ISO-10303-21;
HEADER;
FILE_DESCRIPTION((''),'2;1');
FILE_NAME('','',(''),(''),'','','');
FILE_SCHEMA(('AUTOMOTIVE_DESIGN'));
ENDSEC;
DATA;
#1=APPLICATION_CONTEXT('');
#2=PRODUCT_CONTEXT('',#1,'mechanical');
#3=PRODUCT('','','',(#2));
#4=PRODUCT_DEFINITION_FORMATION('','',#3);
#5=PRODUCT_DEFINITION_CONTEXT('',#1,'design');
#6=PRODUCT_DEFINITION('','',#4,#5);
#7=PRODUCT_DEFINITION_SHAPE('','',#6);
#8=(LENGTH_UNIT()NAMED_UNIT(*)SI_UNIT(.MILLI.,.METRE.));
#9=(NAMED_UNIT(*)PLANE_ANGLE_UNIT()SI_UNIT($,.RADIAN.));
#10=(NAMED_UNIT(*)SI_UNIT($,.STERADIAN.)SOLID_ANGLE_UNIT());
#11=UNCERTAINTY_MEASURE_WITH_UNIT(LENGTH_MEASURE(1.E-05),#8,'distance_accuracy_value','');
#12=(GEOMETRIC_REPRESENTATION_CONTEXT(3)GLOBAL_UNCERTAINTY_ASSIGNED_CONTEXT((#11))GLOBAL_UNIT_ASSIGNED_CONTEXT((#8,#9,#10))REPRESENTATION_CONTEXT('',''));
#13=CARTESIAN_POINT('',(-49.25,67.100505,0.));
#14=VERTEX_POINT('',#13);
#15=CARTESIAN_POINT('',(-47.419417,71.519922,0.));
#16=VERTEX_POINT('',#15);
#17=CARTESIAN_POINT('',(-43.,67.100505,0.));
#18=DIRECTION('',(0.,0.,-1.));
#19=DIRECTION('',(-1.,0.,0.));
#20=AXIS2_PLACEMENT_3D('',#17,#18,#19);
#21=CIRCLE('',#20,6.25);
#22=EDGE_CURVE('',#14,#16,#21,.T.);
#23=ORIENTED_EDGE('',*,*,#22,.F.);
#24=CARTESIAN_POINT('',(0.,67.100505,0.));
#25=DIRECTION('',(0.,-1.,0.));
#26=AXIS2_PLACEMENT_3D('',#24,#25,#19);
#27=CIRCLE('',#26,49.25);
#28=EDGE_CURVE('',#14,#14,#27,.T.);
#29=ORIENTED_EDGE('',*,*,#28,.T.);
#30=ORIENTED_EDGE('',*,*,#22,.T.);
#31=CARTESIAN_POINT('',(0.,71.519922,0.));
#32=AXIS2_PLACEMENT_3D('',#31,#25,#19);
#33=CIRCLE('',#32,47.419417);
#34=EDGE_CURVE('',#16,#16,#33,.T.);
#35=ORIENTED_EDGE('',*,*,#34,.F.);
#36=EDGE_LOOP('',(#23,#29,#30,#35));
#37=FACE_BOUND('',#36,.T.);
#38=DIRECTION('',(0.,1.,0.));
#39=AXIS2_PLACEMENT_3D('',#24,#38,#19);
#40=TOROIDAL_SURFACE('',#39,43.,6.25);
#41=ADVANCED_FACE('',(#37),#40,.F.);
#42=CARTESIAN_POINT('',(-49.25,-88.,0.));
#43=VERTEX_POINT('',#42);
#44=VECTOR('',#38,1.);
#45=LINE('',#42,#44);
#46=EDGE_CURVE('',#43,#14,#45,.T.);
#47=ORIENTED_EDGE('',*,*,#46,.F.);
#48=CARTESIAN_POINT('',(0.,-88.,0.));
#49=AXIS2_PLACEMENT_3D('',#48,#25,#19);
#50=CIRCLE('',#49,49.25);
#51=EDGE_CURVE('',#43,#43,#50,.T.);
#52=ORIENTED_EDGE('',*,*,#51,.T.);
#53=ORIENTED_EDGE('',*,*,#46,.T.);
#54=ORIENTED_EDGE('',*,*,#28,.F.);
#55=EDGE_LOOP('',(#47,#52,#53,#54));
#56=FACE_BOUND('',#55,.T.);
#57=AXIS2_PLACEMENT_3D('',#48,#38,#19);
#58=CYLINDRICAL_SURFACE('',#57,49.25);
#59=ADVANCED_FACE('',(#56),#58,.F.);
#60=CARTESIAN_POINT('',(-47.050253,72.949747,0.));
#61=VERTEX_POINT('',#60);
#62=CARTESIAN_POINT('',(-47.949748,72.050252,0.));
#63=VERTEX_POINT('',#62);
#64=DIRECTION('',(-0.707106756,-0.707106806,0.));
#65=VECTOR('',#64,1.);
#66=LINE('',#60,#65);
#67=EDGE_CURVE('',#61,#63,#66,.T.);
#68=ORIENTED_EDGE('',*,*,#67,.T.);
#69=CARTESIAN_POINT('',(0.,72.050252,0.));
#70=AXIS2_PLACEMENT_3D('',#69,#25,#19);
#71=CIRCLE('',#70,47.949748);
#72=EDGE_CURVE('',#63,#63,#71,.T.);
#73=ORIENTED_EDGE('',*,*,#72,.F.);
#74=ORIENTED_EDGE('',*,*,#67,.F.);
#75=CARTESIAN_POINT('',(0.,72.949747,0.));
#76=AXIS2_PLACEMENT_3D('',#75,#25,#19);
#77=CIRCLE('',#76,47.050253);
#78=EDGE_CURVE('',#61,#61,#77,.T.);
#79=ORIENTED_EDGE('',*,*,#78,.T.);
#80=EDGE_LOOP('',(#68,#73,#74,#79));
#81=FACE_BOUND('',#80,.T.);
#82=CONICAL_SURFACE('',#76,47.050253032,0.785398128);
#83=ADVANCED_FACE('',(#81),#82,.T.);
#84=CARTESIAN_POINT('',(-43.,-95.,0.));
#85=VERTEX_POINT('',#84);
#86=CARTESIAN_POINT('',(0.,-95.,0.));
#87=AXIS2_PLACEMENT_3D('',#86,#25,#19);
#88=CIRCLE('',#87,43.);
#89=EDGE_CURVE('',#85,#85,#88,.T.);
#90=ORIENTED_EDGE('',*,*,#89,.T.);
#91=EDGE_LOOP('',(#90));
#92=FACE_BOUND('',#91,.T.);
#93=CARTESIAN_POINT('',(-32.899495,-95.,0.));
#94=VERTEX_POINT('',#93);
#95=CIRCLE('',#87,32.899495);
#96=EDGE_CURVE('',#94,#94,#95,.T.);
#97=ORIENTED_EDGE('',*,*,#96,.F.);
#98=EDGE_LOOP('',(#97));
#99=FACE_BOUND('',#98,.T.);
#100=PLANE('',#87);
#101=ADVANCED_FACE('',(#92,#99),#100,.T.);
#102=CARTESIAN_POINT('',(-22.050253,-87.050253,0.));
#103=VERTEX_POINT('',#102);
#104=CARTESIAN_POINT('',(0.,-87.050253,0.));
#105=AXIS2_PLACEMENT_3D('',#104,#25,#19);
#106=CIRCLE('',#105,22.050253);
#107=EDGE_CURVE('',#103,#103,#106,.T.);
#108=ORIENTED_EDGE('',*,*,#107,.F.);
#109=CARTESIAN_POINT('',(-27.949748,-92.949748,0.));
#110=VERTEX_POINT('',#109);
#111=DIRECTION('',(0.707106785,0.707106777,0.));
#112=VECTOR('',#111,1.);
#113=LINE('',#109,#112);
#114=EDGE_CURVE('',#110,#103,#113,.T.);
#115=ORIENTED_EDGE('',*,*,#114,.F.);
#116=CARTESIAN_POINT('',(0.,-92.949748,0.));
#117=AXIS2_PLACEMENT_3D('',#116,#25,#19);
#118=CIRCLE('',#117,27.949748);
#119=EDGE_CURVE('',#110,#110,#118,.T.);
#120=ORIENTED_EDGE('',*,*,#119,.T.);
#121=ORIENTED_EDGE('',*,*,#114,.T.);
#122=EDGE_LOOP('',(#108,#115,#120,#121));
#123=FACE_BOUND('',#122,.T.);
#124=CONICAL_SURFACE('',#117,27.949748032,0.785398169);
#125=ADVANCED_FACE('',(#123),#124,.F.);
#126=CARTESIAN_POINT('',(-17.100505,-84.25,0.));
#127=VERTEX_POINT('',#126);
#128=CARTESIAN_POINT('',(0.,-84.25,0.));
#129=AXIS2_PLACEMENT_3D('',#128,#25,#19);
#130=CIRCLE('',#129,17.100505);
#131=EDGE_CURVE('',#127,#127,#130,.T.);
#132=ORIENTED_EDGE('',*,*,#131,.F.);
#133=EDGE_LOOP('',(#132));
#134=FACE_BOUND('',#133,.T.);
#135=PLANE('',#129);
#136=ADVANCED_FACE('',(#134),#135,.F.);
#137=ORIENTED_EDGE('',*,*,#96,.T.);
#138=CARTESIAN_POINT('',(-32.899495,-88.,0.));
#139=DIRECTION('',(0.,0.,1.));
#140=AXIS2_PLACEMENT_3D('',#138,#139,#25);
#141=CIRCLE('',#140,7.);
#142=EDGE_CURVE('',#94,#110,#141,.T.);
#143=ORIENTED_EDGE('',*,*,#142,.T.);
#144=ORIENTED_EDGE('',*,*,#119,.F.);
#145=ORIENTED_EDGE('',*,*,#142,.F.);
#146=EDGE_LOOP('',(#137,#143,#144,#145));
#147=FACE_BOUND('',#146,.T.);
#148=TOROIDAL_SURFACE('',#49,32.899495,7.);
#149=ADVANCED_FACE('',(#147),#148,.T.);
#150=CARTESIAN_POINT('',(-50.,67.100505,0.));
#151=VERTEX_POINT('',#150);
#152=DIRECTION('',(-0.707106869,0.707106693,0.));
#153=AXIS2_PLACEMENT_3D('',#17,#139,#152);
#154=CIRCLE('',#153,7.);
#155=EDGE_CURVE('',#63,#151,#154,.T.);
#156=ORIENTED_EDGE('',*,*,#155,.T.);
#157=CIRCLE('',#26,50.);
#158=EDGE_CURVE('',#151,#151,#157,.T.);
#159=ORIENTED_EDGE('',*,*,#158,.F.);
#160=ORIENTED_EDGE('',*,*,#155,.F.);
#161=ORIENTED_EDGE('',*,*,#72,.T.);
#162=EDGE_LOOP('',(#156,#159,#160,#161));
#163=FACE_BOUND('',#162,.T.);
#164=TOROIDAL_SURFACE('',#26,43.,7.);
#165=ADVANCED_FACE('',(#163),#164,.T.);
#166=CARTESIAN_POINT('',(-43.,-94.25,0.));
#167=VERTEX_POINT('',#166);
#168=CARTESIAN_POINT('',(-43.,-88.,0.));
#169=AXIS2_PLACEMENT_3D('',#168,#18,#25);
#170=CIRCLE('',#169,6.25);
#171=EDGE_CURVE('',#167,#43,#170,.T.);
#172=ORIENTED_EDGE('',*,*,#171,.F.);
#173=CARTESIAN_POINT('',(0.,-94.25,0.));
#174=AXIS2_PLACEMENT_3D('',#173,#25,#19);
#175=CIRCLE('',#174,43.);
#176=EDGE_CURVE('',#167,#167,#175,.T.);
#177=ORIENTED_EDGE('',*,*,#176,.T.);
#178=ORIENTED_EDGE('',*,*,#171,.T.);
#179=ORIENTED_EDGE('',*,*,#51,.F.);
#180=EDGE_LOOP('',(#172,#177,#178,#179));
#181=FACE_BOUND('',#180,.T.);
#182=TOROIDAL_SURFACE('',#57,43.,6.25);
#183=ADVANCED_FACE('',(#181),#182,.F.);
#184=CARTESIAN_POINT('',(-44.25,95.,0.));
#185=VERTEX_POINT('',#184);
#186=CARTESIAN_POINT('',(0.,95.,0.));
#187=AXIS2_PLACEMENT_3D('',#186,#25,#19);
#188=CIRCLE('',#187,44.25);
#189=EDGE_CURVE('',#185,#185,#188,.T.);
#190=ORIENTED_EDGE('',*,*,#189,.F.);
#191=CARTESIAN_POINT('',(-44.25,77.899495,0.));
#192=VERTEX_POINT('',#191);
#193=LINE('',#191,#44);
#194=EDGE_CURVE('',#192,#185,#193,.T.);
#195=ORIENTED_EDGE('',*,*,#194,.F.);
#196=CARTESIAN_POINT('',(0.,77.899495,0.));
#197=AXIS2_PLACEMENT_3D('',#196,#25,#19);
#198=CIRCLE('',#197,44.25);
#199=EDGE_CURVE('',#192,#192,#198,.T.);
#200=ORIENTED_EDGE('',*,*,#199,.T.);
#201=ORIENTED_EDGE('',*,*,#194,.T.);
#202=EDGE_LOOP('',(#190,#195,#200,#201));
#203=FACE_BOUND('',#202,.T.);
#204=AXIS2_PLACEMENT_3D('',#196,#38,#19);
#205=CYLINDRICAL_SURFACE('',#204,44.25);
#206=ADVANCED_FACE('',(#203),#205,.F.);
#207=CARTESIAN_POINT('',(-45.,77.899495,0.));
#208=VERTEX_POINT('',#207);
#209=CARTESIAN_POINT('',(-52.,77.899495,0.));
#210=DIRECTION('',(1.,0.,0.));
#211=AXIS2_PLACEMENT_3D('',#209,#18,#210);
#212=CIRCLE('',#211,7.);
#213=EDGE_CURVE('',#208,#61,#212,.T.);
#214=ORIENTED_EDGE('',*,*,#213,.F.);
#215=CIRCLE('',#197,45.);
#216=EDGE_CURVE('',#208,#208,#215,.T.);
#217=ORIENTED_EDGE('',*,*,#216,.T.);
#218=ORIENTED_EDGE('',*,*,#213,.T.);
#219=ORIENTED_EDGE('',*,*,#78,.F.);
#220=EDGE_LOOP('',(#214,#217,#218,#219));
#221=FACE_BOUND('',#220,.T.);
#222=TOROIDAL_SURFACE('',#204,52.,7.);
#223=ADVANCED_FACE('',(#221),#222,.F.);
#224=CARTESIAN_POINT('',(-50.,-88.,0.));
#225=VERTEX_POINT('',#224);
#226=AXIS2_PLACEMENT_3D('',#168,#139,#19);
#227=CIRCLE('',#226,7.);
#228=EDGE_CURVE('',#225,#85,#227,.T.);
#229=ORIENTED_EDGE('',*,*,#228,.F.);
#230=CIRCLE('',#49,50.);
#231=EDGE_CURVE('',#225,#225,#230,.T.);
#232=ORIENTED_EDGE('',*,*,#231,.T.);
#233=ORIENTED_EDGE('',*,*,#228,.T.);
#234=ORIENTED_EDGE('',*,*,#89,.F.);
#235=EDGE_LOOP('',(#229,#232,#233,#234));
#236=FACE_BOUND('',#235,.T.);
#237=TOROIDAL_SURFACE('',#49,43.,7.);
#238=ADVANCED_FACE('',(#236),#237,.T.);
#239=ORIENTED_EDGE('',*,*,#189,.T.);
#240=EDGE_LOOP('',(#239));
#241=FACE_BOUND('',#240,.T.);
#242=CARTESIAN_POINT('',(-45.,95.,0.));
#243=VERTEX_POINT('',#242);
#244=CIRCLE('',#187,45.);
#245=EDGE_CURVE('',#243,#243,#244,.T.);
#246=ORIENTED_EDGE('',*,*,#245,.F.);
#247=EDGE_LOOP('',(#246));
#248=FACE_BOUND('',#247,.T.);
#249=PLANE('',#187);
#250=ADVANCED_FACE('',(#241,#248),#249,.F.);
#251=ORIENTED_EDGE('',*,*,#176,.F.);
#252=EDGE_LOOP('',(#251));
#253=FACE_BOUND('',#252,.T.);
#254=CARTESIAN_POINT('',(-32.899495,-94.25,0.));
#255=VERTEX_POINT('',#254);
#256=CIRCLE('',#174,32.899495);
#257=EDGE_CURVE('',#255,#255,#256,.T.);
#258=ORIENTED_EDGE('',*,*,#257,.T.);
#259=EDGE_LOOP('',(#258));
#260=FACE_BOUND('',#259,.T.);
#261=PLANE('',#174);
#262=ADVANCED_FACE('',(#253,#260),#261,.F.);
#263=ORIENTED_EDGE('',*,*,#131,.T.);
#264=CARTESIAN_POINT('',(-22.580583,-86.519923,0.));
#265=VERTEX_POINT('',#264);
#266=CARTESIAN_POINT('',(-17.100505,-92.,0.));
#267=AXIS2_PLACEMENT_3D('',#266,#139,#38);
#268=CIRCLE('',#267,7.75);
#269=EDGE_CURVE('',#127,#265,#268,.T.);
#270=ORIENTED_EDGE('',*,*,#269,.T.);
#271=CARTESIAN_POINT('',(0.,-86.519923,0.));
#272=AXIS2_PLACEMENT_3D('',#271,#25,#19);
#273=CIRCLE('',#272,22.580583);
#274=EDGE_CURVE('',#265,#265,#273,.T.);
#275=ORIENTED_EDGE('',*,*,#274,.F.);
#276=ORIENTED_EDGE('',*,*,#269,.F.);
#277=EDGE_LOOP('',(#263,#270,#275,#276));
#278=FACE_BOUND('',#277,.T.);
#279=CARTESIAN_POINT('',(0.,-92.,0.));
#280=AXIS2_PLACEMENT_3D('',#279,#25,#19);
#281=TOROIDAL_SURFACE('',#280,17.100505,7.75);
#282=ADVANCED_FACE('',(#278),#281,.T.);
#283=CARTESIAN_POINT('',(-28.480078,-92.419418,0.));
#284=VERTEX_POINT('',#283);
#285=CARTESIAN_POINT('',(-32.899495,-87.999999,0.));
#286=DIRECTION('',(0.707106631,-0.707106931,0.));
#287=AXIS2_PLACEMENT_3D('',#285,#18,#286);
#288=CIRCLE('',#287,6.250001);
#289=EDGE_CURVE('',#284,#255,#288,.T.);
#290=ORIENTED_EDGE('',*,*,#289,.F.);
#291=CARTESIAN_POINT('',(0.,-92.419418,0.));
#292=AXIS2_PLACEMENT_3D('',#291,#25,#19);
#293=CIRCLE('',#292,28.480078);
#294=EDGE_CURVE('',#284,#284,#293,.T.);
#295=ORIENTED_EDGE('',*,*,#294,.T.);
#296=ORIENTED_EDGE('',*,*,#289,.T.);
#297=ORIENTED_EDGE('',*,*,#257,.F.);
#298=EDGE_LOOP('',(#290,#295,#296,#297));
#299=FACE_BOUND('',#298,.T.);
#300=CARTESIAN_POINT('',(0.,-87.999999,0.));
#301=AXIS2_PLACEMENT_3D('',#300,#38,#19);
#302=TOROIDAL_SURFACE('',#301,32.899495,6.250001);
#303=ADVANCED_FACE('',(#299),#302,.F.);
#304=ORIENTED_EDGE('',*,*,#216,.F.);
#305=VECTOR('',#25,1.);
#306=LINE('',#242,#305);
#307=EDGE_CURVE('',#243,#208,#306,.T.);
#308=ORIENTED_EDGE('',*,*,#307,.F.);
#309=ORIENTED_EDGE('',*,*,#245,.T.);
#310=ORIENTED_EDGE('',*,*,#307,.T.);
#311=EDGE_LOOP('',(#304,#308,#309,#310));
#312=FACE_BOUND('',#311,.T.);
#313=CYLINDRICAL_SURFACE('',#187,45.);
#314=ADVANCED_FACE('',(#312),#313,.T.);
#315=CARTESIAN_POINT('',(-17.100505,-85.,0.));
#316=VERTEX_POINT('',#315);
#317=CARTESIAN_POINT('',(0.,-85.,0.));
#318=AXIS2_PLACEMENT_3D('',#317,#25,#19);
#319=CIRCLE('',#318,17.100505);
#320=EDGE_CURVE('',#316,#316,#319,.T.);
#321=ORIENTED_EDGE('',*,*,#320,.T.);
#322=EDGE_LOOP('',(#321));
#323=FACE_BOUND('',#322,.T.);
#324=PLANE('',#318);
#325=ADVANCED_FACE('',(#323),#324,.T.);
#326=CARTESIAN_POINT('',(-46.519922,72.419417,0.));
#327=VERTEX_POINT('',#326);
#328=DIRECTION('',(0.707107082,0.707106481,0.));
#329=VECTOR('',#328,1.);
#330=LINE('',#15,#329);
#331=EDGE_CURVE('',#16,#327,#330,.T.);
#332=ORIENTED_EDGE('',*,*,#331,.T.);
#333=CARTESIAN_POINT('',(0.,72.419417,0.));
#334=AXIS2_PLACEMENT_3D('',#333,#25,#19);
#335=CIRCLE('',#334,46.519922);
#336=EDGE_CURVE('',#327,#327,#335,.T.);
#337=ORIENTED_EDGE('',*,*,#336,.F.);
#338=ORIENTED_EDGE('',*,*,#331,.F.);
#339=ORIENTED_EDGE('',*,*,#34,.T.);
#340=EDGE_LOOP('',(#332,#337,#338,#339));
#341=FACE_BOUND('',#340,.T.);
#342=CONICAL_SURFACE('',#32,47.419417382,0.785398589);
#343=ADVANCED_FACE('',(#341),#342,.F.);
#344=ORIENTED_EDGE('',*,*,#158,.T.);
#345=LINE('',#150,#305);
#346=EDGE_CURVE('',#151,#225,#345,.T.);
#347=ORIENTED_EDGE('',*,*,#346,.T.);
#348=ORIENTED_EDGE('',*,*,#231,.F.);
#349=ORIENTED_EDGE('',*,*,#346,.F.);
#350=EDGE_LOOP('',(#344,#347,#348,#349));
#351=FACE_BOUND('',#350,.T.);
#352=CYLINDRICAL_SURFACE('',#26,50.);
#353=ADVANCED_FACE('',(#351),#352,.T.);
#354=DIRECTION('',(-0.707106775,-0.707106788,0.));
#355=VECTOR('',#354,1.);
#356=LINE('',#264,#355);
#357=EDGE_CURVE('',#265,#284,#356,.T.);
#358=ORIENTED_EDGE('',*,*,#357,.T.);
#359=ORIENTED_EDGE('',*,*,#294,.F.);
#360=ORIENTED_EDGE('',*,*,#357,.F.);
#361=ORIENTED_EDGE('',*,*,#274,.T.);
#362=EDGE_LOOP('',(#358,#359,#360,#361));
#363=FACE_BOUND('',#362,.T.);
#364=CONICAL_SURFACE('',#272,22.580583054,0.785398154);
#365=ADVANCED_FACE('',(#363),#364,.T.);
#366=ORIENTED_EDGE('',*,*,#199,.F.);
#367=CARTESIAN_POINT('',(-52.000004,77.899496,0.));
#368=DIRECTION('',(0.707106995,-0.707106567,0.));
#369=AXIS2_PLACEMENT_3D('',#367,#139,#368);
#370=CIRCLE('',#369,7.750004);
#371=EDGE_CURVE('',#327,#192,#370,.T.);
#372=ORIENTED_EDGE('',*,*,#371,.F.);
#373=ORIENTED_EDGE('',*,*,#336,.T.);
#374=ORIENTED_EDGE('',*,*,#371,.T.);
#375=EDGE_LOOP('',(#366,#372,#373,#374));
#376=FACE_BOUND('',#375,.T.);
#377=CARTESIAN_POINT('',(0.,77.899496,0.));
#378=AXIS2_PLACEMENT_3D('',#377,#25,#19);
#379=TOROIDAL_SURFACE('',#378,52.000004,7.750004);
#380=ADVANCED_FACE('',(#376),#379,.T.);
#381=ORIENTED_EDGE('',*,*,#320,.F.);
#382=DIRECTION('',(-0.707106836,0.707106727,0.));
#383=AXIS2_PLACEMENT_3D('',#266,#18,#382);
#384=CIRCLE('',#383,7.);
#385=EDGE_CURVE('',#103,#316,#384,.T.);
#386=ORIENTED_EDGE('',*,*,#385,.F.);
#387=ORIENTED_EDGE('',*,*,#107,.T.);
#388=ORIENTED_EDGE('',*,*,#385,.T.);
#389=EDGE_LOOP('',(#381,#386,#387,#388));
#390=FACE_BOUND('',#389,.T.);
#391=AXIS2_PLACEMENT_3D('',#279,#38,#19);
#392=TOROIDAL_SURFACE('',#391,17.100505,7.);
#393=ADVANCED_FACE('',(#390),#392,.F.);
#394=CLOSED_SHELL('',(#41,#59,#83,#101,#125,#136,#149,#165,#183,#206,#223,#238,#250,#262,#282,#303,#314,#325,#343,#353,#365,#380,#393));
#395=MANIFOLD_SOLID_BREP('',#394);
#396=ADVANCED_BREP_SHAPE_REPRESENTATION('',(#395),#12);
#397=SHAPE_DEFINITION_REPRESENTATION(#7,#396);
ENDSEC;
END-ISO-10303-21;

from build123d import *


# Not quite as in the source:
# - ends of sketch curves that miss each other by under 0.0002 mm in the source are joined


with BuildPart() as f1:
    # F0 (on Top) → F1 (revolve)
    with BuildSketch(Plane.XY):
        with BuildLine():
            Line((-50, 0), (-49.25, 0))
            Line((-49.25, 0), (-49.25, 67.100505))
            ThreePointArc((-49.25, 67.100505), (-48.7742470782, 69.4922764523), (-47.4194173824, 71.5199223824))
            Line((-47.4194173824, 71.5199223824), (-46.519922, 72.419417))
            ThreePointArc((-46.519922, 72.419417), (-44.839933623, 74.9336983992), (-44.25, 77.899495))
            Line((-44.25, 77.899495), (-44.25, 95))
            Line((-44.25, 95), (-45, 95))
            Line((-45, 95), (-45, 77.899495))
            ThreePointArc((-45, 77.899495), (-45.5328434077, 75.2207106468), (-47.0502530317, 72.9497470317))
            Line((-47.0502530317, 72.9497470317), (-47.949748, 72.050252))
            ThreePointArc((-47.949748, 72.050252), (-49.4671568629, 69.7792886999), (-50, 67.100505))
            Line((-50, 67.100505), (-50, 0))
        make_face()
        with BuildLine():
            Line((0, -85), (0, -84.25))
            Line((0, -84.25), (-17.100505, -84.25))
            ThreePointArc((-17.100505, -84.25), (-20.0663019275, -84.8399337583), (-22.5805830542, -86.5199229458))
            Line((-22.5805830542, -86.5199229458), (-28.480078, -92.419418))
            ThreePointArc((-28.480078, -92.419418), (-30.5077238744, -93.7742472135), (-32.899495, -94.25))
            Line((-32.899495, -94.25), (-43, -94.25))
            ThreePointArc((-43, -94.25), (-47.4194173824, -92.4194173824), (-49.25, -88))
            Line((-49.25, -88), (-49.25, 0))
            Line((-49.25, 0), (-50, 0))
            Line((-50, 0), (-50, -88))
            ThreePointArc((-50, -88), (-47.9497474683, -92.9497474683), (-43, -95))
            Line((-43, -95), (-32.899495, -95))
            ThreePointArc((-32.899495, -95), (-30.2207113001, -94.4671568629), (-27.9497480317, -92.9497479683))
            Line((-27.9497480317, -92.9497479683), (-22.050253, -87.050253))
            ThreePointArc((-22.050253, -87.050253), (-19.7792893532, -85.5328434077), (-17.100505, -85))
            Line((-17.100505, -85), (0, -85))
        make_face()
    revolve(axis=Axis((0, 0, 0), (0, -1, 0)))


solid = f1.part
